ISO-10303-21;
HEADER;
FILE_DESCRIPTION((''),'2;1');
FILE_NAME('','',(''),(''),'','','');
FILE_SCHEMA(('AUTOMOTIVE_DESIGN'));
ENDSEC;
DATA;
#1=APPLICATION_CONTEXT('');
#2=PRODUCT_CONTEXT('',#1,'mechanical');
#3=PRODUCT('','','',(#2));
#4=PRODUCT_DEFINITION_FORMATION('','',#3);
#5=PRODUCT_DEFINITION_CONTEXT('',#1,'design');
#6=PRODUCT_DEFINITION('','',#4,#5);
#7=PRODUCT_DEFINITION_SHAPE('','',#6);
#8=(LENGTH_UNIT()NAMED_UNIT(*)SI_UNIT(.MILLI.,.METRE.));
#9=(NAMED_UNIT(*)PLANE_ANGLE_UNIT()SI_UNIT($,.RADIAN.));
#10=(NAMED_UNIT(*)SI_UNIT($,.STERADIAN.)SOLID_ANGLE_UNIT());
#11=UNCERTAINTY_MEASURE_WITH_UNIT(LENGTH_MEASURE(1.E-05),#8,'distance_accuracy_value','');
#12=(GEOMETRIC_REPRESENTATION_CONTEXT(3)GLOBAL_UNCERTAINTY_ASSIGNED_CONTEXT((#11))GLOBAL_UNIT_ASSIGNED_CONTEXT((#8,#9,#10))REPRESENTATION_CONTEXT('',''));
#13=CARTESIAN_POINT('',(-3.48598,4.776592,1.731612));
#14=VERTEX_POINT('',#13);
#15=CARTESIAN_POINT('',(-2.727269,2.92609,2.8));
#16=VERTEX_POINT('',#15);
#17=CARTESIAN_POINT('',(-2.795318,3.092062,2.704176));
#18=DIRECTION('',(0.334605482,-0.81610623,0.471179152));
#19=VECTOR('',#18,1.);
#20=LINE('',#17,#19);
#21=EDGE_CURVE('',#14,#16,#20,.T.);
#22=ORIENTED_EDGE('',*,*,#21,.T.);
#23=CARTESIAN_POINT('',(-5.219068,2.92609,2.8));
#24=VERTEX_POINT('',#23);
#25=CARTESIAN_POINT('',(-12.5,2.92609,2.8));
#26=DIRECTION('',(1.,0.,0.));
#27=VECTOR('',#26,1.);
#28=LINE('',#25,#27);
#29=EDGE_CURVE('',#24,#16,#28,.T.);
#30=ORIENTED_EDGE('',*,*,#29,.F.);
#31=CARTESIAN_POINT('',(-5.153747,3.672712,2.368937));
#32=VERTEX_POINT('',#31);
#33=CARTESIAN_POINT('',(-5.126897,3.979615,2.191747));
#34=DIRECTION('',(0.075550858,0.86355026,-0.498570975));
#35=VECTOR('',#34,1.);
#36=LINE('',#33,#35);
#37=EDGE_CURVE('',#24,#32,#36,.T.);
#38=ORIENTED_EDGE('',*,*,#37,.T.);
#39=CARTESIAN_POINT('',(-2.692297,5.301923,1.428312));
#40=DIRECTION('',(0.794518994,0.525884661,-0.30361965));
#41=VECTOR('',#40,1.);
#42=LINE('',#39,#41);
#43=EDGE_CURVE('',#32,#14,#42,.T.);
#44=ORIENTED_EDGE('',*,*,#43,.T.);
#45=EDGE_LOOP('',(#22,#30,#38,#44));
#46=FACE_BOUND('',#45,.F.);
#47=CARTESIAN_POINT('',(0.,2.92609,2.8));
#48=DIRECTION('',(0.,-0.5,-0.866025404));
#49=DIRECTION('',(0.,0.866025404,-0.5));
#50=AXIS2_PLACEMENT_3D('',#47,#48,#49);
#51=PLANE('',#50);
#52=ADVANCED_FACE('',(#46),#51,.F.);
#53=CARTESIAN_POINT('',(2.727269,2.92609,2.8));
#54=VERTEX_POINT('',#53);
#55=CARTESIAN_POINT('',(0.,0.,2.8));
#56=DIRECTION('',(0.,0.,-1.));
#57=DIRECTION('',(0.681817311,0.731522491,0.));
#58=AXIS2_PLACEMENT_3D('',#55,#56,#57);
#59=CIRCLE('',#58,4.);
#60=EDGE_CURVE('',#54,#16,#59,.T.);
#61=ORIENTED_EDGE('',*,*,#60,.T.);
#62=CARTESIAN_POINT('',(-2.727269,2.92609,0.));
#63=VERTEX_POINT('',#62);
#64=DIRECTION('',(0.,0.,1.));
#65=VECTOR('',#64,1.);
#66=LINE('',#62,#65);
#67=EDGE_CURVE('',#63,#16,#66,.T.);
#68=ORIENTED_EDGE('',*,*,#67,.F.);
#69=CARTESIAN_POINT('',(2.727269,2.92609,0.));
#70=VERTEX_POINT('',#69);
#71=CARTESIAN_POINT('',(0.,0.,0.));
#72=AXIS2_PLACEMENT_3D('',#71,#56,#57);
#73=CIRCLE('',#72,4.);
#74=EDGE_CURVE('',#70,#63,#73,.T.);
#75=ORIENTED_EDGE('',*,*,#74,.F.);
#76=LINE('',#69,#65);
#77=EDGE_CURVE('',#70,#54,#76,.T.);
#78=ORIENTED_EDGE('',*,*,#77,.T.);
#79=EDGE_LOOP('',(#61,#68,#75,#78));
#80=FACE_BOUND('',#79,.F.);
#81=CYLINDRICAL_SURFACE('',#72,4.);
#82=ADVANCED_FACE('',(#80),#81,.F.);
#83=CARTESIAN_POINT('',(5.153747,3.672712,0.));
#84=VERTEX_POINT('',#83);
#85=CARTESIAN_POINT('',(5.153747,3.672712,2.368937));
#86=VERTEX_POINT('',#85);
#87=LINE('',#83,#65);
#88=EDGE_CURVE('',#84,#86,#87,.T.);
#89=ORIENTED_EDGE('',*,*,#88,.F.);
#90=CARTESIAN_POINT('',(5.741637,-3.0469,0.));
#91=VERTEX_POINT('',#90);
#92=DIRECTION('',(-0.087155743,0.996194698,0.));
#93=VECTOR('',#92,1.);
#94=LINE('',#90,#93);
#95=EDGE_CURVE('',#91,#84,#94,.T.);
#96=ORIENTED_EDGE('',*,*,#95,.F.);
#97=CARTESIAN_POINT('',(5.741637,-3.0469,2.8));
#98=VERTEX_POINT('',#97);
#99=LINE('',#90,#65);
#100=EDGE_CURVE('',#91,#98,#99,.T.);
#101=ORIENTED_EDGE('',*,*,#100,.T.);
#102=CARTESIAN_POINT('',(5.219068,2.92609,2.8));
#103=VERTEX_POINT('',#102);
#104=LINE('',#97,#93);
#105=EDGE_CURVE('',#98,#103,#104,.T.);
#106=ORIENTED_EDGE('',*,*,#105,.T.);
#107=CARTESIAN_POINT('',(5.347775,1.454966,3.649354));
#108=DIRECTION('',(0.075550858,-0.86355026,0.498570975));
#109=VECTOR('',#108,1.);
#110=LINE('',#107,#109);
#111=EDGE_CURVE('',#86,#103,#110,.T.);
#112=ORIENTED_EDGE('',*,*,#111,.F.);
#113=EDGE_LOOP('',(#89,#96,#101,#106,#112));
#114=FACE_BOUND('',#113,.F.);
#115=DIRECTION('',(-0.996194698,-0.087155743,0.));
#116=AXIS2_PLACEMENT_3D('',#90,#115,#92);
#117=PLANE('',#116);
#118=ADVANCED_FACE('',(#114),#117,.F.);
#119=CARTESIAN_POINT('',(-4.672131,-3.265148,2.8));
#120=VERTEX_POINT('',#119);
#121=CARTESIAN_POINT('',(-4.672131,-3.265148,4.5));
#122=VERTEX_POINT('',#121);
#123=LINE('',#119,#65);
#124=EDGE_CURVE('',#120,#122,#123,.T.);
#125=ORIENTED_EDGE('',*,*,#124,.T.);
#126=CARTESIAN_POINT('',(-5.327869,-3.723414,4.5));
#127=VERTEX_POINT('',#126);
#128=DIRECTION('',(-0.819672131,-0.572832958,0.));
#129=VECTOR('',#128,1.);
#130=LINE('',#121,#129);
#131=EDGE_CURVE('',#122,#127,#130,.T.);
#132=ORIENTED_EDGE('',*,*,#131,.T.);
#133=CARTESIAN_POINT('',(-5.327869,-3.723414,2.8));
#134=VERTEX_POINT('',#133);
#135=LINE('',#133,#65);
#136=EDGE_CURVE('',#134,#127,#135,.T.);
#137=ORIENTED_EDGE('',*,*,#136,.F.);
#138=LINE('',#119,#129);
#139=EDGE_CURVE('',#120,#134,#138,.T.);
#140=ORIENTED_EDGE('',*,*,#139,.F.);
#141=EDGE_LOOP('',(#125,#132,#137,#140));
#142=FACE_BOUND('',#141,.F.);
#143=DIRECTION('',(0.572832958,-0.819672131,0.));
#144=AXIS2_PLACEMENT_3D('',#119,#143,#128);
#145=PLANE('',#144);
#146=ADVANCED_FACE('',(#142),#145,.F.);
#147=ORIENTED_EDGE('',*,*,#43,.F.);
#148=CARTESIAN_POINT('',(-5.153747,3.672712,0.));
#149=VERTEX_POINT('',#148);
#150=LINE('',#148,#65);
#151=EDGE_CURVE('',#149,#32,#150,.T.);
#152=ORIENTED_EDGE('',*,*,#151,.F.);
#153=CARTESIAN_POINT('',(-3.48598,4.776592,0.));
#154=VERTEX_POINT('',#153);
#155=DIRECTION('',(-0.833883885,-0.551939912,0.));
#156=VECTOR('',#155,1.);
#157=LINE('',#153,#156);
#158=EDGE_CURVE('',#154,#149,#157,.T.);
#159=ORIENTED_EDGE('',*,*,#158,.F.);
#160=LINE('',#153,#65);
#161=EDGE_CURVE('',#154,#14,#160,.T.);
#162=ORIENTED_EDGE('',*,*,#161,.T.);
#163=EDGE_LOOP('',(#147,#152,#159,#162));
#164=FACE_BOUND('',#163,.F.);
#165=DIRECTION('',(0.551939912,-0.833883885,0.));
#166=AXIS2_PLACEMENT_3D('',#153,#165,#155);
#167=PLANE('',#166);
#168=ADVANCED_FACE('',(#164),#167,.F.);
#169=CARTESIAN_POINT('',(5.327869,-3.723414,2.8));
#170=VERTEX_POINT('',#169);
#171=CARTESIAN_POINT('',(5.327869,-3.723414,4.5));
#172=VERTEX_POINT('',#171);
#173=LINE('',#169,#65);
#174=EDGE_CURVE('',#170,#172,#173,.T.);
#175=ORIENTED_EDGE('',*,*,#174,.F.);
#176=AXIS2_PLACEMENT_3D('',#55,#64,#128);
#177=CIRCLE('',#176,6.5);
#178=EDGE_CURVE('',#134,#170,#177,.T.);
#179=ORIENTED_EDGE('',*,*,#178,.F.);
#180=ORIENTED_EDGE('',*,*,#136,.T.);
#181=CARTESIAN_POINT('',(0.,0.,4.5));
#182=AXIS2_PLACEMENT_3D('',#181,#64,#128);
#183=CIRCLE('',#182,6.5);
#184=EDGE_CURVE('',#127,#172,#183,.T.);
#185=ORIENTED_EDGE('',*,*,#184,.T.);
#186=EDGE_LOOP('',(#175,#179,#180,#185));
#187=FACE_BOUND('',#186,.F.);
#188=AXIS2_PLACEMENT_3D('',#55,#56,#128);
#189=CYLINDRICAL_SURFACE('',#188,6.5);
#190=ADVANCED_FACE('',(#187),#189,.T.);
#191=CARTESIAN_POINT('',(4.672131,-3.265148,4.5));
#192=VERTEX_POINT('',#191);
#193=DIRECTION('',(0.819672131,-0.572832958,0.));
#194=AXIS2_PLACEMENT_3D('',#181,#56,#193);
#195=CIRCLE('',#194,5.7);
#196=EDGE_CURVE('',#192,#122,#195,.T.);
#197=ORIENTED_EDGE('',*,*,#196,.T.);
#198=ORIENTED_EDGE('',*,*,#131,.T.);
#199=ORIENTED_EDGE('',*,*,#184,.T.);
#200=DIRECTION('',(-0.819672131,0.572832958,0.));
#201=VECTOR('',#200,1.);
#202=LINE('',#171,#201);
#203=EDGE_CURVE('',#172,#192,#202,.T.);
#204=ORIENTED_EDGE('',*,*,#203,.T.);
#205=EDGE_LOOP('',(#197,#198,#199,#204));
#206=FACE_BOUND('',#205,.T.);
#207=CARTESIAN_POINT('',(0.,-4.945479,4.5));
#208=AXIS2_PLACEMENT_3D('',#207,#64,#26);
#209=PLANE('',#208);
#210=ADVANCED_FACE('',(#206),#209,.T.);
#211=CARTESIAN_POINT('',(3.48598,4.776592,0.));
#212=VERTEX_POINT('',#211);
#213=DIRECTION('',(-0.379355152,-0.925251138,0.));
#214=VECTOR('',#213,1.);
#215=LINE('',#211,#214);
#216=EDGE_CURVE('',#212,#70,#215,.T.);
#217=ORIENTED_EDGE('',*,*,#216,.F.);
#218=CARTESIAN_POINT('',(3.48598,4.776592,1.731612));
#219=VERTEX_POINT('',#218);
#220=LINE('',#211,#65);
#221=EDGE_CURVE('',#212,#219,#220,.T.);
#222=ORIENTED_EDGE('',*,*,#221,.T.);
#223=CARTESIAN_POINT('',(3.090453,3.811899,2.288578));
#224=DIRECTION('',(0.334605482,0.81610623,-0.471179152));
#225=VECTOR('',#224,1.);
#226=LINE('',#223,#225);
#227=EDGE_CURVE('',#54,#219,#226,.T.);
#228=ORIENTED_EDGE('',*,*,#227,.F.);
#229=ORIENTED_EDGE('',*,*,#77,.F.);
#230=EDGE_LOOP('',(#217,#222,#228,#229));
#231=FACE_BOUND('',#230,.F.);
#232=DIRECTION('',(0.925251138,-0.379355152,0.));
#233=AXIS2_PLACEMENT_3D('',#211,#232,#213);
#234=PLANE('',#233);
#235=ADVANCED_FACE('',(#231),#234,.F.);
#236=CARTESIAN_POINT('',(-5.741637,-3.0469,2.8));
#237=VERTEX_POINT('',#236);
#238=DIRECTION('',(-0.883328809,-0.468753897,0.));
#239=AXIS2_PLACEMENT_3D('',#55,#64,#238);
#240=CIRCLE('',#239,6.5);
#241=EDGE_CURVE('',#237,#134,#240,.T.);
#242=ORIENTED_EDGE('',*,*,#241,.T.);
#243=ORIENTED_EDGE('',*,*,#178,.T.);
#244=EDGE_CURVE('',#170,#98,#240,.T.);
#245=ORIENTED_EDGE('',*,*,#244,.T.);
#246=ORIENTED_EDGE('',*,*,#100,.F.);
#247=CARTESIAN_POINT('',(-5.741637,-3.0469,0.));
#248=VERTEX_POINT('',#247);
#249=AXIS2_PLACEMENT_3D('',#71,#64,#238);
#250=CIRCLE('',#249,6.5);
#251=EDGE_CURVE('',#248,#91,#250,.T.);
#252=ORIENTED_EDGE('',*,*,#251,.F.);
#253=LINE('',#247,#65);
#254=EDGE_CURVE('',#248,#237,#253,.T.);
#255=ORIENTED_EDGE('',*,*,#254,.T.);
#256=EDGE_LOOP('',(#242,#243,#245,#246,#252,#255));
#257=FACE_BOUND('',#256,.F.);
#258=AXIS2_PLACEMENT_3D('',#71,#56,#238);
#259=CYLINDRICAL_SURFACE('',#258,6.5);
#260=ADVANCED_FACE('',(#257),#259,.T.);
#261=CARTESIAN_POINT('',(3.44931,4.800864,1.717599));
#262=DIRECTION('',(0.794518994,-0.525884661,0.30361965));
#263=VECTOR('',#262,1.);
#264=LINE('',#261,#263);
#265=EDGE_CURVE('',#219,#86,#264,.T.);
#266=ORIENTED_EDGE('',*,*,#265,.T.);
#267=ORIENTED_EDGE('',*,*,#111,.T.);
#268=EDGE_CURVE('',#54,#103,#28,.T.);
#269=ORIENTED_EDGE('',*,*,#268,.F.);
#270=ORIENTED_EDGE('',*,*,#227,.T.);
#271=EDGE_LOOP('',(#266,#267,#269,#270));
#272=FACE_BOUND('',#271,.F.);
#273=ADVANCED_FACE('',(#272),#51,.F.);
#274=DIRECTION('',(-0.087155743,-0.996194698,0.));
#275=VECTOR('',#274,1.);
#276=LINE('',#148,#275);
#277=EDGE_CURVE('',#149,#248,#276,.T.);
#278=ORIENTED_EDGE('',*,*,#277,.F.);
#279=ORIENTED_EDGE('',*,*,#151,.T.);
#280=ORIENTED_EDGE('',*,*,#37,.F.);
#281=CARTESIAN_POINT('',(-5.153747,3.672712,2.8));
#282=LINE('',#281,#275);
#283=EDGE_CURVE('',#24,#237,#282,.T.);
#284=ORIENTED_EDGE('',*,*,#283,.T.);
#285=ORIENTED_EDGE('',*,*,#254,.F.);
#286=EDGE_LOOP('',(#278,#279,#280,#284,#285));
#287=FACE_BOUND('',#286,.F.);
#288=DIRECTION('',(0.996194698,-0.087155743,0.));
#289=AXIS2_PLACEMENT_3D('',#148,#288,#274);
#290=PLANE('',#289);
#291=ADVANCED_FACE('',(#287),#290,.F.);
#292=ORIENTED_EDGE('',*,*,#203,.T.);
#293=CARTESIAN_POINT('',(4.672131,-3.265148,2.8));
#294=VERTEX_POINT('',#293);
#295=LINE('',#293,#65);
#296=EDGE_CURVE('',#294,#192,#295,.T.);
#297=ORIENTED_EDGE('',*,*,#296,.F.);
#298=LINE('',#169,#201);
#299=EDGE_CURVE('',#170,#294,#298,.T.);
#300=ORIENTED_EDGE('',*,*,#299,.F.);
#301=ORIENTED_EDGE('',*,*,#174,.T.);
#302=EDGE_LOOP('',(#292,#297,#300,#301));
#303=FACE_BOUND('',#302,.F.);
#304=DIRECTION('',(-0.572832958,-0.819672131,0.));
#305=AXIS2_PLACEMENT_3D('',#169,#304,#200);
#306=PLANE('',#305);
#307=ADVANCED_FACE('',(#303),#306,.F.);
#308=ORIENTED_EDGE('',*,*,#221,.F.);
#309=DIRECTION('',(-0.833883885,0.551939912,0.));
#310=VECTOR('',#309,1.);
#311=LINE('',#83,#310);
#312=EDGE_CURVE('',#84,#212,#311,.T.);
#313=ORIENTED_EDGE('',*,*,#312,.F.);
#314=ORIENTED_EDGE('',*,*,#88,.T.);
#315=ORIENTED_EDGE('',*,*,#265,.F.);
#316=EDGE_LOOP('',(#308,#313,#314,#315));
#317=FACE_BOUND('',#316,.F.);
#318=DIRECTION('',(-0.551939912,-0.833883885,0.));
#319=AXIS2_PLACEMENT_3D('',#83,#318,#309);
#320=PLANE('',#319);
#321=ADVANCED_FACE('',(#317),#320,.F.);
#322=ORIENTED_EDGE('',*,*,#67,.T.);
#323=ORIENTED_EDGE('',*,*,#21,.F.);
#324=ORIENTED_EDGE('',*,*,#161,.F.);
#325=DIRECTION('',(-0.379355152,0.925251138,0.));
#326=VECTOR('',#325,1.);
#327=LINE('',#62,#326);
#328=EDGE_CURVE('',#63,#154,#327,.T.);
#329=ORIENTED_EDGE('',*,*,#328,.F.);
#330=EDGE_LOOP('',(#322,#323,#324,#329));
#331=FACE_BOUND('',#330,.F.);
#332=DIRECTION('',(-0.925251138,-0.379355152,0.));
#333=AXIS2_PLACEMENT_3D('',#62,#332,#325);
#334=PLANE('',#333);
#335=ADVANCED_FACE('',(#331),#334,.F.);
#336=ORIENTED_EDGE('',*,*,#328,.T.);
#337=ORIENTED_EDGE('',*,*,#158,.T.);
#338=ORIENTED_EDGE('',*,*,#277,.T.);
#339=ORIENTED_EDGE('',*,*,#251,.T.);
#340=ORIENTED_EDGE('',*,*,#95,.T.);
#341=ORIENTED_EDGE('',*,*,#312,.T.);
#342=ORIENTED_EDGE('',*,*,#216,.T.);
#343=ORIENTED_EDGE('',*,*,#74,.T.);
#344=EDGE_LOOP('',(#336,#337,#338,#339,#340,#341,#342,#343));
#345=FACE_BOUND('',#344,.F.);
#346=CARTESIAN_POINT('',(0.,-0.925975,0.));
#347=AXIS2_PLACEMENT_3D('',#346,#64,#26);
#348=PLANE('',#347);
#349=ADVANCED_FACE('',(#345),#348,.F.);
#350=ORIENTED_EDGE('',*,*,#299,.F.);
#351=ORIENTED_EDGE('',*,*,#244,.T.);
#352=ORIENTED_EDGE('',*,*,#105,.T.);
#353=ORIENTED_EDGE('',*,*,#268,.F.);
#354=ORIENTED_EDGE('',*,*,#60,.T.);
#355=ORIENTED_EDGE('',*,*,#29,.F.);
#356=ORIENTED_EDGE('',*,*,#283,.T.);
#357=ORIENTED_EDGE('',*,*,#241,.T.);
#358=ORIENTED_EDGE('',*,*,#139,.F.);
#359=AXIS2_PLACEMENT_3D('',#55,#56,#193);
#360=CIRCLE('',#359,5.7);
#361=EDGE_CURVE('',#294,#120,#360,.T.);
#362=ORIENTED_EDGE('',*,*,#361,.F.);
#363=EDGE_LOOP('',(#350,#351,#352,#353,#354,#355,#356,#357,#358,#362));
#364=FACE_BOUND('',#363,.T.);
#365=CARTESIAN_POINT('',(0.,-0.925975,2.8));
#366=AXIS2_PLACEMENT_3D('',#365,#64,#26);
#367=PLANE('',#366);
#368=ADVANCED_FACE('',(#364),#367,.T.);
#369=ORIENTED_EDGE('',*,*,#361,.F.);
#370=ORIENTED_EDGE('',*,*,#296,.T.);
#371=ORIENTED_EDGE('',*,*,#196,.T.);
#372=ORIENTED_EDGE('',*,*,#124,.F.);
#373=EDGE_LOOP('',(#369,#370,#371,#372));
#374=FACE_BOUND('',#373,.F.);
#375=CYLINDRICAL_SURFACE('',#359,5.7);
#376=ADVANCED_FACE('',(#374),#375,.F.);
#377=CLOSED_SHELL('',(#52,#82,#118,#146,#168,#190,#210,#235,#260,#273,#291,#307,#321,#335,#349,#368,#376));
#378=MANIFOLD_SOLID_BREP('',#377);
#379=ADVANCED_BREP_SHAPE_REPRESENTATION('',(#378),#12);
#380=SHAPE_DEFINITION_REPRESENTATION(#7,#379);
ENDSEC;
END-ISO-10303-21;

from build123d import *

# Parameters (mm, degrees)
F2_DEPTH = 2.8
F4_DEPTH = 1.7
F6_DEPTH = 12.5


# Not quite as in the source:
# - a feature of the source that left no trace in its solid (it failed there, or was rolled back) is left out


with BuildPart() as f2:
    # F1 (on Top) → F2 (new body)
    with BuildSketch(Plane.XY):
        with BuildLine():
            Line((-5.1537473182, 3.6727124144), (-5.7416372565, -3.0469003289))
            ThreePointArc((-5.7416372565, -3.0469003289), (0, -6.5), (5.7416372565, -3.0469003289))
            Line((5.7416372565, -3.0469003289), (5.1537473182, 3.6727124144))
            Line((5.1537473182, 3.6727124144), (3.4859795486, 4.7765922388))
            Line((3.4859795486, 4.7765922388), (2.7272692442, 2.9260899627))
            ThreePointArc((2.7272692442, 2.9260899627), (0, -4), (-2.7272692442, 2.9260899627))
            Line((-2.7272692442, 2.9260899627), (-3.4859795486, 4.7765922388))
            Line((-3.4859795486, 4.7765922388), (-5.1537473182, 3.6727124144))
        make_face()
    extrude(amount=F2_DEPTH)

    # F3 (on face) → F4 (join)
    with BuildSketch(Plane.XY.offset(2.8)):
        with BuildLine():
            Line((-4.6721311475, -3.2651478589), (-5.3278688525, -3.723414225))
            ThreePointArc((-5.3278688525, -3.723414225), (0, -6.5), (5.3278688525, -3.723414225))
            Line((5.3278688525, -3.723414225), (4.6721311475, -3.2651478589))
            ThreePointArc((4.6721311475, -3.2651478589), (0, -5.7), (-4.6721311475, -3.2651478589))
        make_face()
    extrude(amount=F4_DEPTH)

    # F5 (on Right) → F6 (cut, symmetric)
    with BuildSketch(Plane.YZ):
        Polygon((6.7765922388, 2.8), (2.9260899627, 2.8), (6.7765922388, 0.5769114744), align=None)
    extrude(amount=F6_DEPTH, both=True, mode=Mode.SUBTRACT)


solid = f2.part
